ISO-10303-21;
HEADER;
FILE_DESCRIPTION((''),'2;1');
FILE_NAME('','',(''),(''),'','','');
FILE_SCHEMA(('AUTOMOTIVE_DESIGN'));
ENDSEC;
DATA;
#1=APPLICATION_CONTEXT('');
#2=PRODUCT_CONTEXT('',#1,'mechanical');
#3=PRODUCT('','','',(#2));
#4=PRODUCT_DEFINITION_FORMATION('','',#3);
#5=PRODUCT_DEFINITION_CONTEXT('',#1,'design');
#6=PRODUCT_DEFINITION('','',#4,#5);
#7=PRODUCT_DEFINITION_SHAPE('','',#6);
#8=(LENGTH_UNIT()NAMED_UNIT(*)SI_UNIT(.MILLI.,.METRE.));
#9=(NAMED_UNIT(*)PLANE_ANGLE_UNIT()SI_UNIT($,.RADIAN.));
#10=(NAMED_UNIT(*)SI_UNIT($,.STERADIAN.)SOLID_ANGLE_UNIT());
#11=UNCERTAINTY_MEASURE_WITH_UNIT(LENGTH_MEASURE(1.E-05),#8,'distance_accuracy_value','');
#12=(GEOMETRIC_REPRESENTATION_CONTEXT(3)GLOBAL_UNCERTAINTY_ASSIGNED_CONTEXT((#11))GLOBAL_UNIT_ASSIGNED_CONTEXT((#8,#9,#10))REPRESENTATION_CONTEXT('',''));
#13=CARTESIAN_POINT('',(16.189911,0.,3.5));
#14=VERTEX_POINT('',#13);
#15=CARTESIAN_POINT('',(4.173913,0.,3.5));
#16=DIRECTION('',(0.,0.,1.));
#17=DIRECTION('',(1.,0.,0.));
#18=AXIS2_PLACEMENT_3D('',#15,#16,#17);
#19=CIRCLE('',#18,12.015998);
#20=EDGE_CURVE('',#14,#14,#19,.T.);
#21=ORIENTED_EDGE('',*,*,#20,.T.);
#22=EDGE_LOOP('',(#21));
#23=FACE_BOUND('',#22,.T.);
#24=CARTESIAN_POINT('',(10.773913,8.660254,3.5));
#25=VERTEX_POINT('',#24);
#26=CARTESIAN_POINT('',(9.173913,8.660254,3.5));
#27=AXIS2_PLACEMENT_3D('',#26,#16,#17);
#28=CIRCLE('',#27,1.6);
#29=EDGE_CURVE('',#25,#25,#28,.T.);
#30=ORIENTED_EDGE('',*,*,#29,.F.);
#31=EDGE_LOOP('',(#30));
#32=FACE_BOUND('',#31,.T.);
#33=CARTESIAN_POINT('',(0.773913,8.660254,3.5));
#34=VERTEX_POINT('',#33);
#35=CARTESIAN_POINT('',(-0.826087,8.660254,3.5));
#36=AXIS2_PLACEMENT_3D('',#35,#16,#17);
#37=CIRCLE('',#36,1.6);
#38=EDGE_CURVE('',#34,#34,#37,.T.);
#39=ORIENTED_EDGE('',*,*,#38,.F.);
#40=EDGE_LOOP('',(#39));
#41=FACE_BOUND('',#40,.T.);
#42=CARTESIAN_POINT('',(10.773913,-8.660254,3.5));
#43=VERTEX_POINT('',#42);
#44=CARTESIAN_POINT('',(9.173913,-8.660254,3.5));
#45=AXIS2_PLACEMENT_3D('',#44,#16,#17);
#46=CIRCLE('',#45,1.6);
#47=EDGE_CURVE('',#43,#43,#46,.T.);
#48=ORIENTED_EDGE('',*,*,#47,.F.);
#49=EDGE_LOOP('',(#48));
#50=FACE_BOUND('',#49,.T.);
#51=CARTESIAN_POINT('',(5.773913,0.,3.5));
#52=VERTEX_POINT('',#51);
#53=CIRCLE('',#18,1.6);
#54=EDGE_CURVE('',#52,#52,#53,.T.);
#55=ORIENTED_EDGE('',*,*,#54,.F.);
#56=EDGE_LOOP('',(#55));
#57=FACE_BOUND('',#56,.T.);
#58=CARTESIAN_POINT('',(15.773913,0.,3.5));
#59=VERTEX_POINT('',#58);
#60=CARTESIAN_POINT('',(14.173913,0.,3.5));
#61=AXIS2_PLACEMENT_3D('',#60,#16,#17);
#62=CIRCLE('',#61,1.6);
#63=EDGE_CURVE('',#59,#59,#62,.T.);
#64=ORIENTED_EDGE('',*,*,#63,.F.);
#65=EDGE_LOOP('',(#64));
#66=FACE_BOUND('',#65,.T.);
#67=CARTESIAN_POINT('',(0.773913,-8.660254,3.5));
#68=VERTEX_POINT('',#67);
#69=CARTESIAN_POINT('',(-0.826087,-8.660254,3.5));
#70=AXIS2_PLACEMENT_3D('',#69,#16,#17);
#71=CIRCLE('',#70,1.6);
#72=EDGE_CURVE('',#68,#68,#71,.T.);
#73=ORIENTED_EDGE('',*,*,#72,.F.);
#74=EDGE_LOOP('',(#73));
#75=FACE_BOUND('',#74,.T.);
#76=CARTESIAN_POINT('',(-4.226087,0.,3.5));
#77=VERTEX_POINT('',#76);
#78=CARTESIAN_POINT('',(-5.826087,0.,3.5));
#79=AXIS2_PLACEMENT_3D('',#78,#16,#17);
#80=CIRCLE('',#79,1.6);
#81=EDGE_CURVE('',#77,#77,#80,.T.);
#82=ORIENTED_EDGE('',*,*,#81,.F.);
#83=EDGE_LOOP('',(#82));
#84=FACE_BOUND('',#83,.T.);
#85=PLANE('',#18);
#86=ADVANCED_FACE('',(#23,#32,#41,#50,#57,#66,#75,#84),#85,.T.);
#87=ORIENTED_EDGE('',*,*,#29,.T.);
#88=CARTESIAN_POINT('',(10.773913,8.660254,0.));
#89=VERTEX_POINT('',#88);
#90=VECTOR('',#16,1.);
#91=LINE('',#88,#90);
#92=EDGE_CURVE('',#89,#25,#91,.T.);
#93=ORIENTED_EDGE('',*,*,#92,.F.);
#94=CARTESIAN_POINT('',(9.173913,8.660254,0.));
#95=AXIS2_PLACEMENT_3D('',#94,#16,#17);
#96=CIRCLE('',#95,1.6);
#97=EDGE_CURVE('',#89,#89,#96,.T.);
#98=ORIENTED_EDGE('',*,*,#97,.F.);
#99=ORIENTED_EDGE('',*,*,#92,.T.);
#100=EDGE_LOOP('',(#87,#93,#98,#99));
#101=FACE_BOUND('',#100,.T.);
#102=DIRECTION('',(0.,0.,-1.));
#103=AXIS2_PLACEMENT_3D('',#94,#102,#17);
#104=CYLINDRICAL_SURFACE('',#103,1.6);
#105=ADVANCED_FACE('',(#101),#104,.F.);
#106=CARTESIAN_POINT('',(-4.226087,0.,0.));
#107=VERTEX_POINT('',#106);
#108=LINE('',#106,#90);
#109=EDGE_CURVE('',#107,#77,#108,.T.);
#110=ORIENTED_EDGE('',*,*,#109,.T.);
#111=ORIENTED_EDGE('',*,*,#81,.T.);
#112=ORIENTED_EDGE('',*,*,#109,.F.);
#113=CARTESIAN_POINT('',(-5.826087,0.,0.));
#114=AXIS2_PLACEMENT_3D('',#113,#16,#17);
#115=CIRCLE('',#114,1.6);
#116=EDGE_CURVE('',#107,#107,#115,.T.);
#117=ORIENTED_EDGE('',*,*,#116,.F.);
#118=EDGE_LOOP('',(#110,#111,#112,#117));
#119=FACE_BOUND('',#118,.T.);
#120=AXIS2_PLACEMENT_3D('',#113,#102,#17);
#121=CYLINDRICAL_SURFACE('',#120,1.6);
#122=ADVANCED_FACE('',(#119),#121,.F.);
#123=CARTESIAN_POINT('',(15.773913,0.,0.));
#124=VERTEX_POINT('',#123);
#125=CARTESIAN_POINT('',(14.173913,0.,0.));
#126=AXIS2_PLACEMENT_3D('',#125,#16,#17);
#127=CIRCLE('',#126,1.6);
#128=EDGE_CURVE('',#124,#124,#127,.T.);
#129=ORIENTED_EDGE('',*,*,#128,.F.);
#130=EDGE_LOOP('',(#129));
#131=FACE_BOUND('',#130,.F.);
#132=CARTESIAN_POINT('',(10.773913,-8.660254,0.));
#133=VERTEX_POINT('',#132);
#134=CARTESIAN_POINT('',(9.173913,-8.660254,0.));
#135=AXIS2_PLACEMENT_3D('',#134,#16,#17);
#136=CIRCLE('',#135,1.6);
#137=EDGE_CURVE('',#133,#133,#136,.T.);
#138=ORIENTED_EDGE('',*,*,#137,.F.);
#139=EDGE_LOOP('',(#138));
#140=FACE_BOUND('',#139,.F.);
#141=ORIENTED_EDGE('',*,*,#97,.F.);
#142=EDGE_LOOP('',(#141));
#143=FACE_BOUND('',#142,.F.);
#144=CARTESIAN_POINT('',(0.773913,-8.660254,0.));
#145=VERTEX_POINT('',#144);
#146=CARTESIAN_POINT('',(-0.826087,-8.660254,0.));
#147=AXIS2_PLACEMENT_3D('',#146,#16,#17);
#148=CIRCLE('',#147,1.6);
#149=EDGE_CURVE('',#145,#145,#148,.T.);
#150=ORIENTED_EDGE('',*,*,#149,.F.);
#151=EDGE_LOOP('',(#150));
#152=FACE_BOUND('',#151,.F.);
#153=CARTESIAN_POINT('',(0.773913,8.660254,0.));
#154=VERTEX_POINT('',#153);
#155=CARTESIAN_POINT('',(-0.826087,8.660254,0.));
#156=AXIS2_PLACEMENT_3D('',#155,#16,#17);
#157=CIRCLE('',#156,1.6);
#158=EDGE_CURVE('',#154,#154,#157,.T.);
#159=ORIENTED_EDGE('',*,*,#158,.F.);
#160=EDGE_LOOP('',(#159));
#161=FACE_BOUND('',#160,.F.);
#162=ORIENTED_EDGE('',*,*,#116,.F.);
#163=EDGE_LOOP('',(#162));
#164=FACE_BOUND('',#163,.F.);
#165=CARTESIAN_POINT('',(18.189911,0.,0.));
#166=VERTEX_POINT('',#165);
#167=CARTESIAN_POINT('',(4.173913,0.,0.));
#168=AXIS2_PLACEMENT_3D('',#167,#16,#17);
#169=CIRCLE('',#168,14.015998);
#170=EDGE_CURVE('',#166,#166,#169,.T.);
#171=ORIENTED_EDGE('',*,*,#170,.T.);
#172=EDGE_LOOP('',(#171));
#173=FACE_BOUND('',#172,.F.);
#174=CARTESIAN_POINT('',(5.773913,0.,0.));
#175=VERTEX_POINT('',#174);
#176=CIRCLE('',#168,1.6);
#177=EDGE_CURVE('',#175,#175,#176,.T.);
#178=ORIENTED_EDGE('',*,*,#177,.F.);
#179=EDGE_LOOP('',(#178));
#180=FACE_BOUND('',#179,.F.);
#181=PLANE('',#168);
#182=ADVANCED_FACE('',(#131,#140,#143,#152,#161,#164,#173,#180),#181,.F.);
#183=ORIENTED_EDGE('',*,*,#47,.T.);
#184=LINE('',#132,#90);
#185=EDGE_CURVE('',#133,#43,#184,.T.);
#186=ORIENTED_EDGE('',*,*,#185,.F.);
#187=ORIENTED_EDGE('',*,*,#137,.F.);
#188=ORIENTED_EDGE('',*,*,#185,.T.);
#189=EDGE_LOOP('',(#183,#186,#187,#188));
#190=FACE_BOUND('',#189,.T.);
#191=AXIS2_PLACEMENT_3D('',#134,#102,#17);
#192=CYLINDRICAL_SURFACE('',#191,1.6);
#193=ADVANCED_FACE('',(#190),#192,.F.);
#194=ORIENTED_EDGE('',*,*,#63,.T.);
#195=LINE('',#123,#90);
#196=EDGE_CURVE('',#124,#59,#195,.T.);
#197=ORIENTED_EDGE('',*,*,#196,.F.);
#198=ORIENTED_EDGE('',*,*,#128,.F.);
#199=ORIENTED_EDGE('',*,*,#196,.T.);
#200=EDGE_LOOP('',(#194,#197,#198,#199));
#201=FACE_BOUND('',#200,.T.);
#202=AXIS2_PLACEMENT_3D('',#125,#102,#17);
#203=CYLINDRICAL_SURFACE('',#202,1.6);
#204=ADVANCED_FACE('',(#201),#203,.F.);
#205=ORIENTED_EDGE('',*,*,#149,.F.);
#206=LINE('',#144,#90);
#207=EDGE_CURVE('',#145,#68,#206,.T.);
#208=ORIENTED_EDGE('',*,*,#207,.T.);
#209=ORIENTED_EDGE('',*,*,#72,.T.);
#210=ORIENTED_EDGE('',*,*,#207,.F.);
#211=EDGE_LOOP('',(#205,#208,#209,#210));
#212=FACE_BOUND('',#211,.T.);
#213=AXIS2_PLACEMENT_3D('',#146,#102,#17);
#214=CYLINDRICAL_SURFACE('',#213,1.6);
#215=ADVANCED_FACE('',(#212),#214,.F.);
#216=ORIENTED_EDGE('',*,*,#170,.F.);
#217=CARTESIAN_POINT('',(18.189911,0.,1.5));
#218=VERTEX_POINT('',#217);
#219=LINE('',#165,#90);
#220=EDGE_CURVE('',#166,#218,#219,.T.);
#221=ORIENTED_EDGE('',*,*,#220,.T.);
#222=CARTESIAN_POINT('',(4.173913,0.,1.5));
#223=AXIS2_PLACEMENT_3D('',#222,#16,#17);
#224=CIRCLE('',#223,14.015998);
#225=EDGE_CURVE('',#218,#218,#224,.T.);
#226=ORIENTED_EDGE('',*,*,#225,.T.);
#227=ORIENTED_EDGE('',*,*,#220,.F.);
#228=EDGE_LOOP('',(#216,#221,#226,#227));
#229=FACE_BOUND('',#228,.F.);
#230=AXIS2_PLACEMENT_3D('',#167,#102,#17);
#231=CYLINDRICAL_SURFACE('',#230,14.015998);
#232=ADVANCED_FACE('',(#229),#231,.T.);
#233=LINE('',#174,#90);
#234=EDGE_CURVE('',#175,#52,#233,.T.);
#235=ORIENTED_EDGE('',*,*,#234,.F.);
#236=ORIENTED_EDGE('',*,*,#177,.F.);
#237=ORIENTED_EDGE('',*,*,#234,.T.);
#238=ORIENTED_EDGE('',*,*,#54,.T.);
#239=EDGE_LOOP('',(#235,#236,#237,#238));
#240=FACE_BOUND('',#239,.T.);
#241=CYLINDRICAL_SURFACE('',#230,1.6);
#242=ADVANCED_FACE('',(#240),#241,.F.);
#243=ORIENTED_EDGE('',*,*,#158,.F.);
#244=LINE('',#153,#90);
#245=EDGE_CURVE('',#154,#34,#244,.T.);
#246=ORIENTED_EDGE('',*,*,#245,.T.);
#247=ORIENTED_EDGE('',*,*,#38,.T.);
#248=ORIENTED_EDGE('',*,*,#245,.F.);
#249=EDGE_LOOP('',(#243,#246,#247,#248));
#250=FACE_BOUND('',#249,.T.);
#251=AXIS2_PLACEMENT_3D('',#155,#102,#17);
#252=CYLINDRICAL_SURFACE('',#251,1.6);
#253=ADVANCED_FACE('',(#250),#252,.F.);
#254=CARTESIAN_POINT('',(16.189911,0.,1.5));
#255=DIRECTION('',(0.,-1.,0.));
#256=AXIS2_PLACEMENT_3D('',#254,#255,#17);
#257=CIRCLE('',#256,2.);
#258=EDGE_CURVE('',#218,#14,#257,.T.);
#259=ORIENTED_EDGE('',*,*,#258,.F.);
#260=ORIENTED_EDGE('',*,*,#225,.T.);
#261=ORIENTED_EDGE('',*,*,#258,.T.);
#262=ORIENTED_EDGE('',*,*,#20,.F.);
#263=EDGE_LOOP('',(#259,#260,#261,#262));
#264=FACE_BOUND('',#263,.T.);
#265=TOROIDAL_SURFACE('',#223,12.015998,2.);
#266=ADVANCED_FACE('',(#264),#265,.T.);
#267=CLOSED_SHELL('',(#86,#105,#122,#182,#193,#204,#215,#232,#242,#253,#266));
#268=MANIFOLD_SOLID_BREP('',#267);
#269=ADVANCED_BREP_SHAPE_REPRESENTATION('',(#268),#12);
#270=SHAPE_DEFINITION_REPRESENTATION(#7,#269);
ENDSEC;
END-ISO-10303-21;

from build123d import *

# Parameters (mm, degrees)
F0_R     = 14.0159979079
F0_R_2   = 1.6
F1_DEPTH = 3.5
F2_R     = 2


# Not quite as in the source:
# - a feature names something its author has since deleted; it is built from what else it names


with BuildPart() as f1:
    # F0 (on Top) → F1 (new body)
    with BuildSketch(Plane.XY):
        with Locations((4.1739126741, 0)):
            Circle(F0_R)
        with Locations((-0.8260871004, -8.6602539076)):
            Circle(F0_R_2, mode=Mode.SUBTRACT)
        with Locations((-5.8260870252, 0)):
            Circle(F0_R_2, mode=Mode.SUBTRACT)
        with Locations((4.1739126741, 0)):
            Circle(F0_R_2, mode=Mode.SUBTRACT)
        with Locations((9.1739127493, -8.6602539076)):
            Circle(F0_R_2, mode=Mode.SUBTRACT)
        with Locations((14.1739126741, 0)):
            Circle(F0_R_2, mode=Mode.SUBTRACT)
        with Locations((-0.8260871004, 8.6602539076)):
            Circle(F0_R_2, mode=Mode.SUBTRACT)
        with Locations((9.1739127493, 8.6602539076)):
            Circle(F0_R_2, mode=Mode.SUBTRACT)
    extrude(amount=F1_DEPTH)

    # F2
    f2_edges = [f1.edges().sort_by_distance(p)[0] for p in [
        (-9.842085, 0, 3.5),
    ]]
    fillet(f2_edges, radius=F2_R)


solid = f1.part
